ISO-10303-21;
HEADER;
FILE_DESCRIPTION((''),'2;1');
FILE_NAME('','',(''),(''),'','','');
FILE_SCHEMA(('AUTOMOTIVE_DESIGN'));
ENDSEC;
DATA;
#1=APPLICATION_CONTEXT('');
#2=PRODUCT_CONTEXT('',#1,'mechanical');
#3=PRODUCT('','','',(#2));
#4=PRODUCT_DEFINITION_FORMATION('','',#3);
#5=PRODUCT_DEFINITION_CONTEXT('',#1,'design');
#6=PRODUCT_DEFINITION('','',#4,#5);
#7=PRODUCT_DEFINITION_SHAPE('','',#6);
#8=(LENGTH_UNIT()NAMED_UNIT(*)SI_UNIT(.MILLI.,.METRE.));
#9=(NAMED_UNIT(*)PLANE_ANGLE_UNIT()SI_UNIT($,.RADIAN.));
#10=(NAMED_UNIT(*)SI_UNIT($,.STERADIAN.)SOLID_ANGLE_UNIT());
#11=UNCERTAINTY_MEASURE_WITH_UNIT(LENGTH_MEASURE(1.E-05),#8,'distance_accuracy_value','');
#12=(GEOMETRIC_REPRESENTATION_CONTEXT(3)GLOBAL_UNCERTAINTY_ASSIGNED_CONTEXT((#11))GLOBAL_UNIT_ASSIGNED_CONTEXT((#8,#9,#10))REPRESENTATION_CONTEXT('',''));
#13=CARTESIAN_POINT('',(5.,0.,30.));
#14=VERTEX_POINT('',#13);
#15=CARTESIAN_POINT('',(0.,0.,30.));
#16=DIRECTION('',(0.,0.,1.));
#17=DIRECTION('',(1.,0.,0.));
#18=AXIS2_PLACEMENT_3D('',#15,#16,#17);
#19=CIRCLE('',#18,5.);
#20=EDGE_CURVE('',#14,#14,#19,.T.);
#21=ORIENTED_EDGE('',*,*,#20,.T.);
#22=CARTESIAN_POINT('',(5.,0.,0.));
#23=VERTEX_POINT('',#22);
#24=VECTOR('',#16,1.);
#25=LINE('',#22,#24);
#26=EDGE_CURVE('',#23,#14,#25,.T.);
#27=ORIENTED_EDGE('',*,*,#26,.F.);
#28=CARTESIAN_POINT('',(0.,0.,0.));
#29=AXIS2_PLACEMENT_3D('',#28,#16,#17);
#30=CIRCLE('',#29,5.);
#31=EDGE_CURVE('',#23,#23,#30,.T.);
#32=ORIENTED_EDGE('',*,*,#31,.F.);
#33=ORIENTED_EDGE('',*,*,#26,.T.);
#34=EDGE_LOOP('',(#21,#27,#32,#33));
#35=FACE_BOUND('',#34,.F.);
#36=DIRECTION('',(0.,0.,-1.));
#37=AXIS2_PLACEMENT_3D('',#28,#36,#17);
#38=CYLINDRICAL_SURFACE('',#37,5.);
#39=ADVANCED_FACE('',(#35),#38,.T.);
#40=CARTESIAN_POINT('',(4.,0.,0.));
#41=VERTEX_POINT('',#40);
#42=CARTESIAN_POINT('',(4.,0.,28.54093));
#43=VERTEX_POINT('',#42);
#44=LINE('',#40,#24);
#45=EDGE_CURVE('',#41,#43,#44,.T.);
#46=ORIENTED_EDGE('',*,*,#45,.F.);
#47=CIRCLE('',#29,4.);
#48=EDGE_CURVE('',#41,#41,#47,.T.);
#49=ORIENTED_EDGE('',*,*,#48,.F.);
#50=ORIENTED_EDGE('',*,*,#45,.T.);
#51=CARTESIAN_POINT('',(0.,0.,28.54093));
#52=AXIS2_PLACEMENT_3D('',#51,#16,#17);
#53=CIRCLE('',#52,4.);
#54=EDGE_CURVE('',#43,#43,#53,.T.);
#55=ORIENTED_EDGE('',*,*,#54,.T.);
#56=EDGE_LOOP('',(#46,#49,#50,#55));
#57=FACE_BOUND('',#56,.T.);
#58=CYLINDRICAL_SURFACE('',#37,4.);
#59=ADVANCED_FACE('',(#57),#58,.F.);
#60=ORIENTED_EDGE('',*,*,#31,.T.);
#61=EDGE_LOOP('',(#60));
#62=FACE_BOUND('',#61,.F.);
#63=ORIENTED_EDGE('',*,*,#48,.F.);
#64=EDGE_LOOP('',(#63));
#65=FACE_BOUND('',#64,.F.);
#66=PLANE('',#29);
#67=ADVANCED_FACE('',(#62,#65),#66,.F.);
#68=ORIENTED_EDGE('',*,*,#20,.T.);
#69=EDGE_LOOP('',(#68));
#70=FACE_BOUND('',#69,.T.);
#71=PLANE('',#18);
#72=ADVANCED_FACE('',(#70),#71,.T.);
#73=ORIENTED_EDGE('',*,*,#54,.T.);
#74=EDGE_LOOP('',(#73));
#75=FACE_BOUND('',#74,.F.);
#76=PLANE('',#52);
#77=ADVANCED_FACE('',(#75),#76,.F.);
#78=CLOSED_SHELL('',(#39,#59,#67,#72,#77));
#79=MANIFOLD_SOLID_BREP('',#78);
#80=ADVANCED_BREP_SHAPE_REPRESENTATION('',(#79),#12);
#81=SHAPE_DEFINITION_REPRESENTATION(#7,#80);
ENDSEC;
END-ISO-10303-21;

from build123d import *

# Parameters (mm, degrees)
F0_R     = 5
F1_DEPTH = 30
F2_R     = 4
F3_DEPTH = 28.5409297794


# Not quite as in the source:
# - a feature names something its author has since deleted; it is built from what else it names


with BuildPart() as f1:
    # F0 (on Top) → F1 (new body)
    with BuildSketch(Plane.XY):
        Circle(F0_R)
    extrude(amount=F1_DEPTH)

    # F2 (on face) → F3 (cut)
    with BuildSketch(Plane.XY):
        Circle(F2_R)
    extrude(amount=F3_DEPTH, mode=Mode.SUBTRACT)


solid = f1.part
